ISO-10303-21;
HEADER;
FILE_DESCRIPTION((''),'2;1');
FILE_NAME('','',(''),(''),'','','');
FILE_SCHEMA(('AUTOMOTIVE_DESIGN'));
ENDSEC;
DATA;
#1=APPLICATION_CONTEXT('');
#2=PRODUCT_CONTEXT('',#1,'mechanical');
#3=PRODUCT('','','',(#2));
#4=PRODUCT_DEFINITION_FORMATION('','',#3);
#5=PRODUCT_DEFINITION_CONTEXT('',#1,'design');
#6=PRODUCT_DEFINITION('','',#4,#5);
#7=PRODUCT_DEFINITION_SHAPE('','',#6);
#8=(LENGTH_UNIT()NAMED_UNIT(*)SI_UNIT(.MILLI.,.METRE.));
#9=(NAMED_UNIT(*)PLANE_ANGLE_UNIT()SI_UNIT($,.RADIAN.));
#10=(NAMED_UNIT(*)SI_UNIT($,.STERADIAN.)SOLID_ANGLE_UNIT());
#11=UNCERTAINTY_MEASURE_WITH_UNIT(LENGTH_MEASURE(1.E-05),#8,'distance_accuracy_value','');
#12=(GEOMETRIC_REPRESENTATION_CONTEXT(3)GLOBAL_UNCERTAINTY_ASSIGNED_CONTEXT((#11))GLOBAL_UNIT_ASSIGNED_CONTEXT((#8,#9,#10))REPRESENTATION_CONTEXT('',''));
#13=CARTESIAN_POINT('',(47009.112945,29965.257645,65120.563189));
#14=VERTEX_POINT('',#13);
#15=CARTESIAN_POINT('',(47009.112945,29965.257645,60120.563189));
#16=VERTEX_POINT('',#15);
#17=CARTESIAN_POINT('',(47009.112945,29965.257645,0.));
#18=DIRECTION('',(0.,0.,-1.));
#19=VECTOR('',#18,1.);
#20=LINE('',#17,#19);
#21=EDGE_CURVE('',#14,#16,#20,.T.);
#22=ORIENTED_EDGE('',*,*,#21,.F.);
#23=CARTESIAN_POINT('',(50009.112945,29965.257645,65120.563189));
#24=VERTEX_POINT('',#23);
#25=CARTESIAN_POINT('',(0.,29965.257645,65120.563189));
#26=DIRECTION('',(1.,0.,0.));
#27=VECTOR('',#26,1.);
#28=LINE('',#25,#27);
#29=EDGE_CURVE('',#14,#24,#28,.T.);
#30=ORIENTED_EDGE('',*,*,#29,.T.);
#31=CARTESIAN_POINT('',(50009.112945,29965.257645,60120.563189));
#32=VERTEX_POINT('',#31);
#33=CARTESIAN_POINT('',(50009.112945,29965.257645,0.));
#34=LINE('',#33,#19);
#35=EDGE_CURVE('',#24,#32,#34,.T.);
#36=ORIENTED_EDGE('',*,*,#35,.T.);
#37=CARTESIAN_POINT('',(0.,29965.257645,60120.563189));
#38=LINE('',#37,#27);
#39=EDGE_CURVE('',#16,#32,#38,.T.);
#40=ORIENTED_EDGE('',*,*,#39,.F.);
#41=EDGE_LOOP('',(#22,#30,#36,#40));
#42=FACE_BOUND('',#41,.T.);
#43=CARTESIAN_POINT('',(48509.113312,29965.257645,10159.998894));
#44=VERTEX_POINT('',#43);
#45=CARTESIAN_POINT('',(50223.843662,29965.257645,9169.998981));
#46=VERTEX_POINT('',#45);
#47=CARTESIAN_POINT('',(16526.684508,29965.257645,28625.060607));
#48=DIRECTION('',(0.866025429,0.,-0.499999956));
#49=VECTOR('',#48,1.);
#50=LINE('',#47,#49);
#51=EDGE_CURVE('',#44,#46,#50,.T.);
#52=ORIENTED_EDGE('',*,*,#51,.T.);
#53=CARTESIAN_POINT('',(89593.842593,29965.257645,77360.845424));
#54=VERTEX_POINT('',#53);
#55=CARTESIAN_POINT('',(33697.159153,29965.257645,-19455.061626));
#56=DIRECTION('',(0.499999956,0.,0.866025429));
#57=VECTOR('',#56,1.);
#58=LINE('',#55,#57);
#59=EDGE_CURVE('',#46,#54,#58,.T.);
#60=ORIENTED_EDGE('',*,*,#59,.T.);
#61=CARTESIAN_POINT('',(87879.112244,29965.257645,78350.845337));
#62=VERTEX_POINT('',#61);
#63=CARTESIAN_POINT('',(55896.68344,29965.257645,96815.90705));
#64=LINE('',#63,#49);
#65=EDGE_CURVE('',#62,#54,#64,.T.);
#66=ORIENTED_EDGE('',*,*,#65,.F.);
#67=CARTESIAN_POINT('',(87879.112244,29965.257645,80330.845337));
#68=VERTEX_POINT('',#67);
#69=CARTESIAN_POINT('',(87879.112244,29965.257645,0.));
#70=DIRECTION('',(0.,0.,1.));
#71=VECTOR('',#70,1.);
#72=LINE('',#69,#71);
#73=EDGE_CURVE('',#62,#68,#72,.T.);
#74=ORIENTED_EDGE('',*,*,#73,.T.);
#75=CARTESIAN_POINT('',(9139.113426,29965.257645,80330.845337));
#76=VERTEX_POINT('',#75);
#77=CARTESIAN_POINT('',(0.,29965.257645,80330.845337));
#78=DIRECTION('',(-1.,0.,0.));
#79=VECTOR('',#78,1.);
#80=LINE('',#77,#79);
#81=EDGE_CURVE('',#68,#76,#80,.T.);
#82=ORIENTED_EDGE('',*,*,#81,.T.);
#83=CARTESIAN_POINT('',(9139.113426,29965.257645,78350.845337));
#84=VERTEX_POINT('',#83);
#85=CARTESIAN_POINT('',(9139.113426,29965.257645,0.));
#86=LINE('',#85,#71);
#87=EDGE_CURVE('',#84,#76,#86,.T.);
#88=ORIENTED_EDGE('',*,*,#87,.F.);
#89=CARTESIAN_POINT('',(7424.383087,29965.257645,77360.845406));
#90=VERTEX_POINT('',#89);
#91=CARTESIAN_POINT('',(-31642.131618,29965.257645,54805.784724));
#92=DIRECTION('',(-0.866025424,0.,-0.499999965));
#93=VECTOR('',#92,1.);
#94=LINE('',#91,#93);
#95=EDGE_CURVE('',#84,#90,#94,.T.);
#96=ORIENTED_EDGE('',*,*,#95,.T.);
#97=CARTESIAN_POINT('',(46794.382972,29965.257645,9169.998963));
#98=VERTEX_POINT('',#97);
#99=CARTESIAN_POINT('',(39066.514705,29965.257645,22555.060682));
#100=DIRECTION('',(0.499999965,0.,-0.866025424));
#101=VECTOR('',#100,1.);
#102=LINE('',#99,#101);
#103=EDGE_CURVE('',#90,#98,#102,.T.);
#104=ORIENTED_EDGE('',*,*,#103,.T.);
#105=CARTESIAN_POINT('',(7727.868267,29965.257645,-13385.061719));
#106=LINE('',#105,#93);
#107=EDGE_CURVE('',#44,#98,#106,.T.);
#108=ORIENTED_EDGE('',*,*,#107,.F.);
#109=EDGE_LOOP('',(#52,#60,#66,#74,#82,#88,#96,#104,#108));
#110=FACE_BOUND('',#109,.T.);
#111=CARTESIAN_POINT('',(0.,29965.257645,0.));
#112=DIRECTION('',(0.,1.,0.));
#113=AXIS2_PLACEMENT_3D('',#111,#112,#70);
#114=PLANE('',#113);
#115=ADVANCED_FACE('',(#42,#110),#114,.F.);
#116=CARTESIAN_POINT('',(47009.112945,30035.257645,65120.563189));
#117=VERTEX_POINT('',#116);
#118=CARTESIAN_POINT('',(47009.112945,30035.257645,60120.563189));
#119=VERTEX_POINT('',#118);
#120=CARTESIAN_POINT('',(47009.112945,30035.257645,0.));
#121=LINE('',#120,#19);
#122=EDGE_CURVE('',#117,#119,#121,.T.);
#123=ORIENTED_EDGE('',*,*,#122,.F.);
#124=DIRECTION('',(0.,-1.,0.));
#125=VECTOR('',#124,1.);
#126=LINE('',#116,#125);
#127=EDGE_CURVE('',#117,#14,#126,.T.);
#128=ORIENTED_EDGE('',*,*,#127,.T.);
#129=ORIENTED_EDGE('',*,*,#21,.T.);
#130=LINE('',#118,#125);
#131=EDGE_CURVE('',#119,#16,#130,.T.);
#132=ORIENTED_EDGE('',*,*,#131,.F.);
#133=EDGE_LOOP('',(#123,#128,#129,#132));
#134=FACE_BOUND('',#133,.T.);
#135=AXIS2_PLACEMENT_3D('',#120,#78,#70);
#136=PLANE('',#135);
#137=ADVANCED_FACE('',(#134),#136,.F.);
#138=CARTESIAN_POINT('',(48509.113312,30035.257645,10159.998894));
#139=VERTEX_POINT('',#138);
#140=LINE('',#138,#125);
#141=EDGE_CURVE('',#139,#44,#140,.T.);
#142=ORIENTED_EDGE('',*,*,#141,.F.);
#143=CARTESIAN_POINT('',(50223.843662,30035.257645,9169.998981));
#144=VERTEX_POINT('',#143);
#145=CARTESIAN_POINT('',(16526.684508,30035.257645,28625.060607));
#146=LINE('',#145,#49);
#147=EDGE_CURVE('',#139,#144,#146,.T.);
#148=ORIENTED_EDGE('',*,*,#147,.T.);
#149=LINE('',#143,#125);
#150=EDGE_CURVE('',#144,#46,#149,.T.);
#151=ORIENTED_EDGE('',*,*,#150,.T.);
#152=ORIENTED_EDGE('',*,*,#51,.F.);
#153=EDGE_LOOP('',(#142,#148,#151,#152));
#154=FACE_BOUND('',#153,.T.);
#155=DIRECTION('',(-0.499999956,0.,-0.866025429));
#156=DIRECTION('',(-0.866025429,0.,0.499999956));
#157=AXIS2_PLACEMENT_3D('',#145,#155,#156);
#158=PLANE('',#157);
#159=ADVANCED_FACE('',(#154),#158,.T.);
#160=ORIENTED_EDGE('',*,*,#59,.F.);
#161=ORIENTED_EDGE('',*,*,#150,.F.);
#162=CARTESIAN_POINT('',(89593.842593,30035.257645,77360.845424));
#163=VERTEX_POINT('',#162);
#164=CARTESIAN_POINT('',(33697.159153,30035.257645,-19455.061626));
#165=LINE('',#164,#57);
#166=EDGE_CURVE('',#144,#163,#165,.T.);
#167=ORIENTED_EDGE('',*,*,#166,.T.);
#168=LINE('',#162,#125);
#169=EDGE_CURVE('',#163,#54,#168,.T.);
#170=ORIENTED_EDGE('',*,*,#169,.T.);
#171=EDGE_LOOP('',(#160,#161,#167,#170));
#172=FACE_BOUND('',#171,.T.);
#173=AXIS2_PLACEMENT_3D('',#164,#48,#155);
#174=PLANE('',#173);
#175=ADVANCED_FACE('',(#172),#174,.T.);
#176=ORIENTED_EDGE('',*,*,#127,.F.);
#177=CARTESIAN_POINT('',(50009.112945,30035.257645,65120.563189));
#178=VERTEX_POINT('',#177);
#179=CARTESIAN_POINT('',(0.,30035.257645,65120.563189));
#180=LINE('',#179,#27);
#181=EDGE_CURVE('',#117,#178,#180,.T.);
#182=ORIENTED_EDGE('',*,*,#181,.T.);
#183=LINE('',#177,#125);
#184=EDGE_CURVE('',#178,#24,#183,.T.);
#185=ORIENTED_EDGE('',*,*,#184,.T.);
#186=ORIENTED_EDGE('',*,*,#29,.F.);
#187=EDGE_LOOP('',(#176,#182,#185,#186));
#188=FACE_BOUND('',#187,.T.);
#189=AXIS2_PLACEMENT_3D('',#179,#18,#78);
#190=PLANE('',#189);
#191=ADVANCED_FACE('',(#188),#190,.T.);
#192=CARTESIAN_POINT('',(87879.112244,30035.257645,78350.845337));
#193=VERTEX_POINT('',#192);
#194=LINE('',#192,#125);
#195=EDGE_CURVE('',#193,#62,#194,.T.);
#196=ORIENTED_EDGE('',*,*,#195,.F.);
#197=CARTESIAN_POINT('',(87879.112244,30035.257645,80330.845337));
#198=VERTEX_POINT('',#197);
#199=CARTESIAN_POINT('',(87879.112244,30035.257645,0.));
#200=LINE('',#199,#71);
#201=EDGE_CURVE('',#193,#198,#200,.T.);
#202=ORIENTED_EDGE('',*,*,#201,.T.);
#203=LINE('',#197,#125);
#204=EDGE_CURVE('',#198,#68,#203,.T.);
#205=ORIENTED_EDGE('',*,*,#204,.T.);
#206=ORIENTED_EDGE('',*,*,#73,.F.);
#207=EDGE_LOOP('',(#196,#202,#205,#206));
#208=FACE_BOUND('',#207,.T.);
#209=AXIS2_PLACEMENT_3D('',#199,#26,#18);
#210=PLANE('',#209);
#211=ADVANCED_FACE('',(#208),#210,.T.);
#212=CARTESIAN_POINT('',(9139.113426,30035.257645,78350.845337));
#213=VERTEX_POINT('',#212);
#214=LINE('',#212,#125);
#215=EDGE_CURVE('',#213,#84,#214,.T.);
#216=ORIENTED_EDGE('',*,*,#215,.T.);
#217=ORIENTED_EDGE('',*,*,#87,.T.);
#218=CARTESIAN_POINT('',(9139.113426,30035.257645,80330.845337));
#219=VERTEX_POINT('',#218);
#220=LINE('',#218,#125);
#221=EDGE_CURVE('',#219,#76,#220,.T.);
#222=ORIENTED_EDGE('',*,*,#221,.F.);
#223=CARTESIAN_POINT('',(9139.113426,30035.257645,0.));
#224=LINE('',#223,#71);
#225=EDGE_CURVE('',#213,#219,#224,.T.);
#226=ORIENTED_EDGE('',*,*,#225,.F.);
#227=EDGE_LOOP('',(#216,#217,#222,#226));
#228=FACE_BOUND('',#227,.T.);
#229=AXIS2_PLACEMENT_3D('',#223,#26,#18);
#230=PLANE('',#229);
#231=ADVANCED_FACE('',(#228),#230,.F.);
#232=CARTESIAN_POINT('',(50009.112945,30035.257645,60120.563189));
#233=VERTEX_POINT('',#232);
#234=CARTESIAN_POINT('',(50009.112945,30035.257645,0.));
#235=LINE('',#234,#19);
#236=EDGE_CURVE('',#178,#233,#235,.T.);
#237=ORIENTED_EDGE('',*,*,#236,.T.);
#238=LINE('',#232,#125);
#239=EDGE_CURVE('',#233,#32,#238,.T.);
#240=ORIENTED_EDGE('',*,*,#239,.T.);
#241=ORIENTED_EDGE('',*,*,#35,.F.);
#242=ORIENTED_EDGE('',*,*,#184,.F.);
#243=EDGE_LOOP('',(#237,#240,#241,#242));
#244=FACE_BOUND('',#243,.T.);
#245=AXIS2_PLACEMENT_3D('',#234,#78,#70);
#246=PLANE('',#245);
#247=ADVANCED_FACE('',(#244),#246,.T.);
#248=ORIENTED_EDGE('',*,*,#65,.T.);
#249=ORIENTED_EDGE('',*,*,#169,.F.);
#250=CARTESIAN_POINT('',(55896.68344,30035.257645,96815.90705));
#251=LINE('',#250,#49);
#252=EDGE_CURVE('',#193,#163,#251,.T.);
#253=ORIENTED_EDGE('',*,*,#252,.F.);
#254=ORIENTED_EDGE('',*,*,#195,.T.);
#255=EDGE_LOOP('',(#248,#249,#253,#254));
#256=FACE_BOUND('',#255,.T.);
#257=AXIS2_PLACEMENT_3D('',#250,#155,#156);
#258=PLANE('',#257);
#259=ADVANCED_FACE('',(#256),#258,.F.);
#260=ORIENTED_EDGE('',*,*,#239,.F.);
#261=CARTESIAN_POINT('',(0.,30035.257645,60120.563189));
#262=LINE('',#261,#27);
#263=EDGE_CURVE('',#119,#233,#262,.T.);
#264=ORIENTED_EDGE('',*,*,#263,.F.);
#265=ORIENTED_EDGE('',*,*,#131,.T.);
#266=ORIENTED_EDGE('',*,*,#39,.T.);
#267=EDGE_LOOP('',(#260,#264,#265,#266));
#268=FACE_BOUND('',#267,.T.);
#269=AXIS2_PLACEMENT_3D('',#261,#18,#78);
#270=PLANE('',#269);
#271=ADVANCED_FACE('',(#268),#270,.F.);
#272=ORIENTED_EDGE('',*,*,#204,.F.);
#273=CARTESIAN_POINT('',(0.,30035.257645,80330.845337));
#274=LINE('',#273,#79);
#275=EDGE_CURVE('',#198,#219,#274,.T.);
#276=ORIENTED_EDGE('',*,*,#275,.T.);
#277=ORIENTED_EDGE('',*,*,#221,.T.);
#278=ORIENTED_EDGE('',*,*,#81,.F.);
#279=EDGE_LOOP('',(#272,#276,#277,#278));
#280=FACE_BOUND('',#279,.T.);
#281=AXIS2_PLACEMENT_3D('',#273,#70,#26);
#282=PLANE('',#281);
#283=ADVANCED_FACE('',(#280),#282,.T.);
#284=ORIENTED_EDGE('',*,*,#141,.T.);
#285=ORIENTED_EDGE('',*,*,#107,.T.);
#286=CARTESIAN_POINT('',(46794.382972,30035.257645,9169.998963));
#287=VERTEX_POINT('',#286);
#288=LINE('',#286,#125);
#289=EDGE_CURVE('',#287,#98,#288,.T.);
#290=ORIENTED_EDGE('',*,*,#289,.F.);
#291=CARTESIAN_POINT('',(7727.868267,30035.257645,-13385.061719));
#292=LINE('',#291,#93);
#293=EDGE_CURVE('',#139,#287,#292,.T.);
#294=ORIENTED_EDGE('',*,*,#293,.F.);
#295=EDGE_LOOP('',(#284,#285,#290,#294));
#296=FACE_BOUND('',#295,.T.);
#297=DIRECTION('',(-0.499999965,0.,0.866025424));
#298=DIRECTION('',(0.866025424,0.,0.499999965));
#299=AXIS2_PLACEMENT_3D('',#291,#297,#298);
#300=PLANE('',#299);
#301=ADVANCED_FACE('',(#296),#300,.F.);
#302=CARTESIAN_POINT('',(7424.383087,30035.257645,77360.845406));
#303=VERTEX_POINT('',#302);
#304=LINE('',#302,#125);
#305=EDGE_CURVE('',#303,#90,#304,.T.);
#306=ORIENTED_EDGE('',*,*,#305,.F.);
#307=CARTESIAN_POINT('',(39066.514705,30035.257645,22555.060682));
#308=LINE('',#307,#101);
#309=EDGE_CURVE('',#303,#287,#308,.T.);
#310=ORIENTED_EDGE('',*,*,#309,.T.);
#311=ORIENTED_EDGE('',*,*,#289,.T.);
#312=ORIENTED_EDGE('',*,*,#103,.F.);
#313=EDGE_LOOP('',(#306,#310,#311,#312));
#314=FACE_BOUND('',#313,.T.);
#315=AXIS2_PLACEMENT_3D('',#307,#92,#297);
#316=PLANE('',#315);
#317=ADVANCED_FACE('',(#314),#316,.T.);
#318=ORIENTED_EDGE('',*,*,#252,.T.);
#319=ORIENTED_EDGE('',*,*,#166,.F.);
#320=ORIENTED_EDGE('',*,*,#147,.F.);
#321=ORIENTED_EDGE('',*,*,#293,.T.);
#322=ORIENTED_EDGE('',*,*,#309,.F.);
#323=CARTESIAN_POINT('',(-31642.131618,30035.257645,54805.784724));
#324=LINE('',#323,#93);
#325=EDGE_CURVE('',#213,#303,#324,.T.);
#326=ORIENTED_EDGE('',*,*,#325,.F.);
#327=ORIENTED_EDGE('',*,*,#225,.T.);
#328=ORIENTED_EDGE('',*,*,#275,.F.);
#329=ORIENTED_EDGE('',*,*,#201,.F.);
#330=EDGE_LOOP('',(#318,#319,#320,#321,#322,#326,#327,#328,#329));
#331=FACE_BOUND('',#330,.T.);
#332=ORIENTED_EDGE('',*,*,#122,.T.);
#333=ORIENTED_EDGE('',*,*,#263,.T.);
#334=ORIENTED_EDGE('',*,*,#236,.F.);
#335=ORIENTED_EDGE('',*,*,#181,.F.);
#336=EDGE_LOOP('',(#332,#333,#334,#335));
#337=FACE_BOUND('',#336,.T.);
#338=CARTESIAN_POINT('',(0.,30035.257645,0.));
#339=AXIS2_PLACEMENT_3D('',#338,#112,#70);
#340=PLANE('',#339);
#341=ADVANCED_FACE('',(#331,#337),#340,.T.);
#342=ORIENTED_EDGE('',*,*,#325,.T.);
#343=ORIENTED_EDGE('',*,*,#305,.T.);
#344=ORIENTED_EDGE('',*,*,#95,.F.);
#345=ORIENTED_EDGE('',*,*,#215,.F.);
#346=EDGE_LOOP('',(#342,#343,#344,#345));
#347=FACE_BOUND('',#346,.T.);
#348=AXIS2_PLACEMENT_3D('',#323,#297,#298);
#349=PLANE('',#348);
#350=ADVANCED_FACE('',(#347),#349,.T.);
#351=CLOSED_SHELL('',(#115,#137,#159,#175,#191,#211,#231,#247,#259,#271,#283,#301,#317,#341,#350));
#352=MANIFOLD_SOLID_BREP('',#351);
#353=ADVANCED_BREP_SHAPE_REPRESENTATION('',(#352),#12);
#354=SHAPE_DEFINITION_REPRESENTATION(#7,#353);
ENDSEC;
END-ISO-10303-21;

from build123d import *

# Parameters (mm, degrees)
SKETCH2_W           = 3000
SKETCH2_H           = 5000
BOSS_EXTRUDE6_DEPTH = 70


# Read off the part's stored shape, not the designer's step: Imported1
with BuildPart() as part:
    # Sketch2 → Boss-Extrude6 (new body)
    with BuildSketch(Plane(origin=(0, 29965.257644653, 0), x_dir=(1, 0, 0), z_dir=(0, 1, 0))):
        Polygon((87879.112243652, -80330.845336914), (9139.113426208, -80330.845336914), (9139.113426208, -78350.845336914), (7424.383086812, -77360.845406028), (46794.382972371, -9169.998962852), (48509.113311768, -10159.998893738), (50223.843661548, -9169.998980838), (89593.842593433, -77360.845424014), (87879.112243652, -78350.845336914), align=None)
        with Locations((48509.112944927, -62620.563189189)):
            Rectangle(SKETCH2_W, SKETCH2_H, mode=Mode.SUBTRACT)
    extrude(amount=BOSS_EXTRUDE6_DEPTH)


solid = part.part
